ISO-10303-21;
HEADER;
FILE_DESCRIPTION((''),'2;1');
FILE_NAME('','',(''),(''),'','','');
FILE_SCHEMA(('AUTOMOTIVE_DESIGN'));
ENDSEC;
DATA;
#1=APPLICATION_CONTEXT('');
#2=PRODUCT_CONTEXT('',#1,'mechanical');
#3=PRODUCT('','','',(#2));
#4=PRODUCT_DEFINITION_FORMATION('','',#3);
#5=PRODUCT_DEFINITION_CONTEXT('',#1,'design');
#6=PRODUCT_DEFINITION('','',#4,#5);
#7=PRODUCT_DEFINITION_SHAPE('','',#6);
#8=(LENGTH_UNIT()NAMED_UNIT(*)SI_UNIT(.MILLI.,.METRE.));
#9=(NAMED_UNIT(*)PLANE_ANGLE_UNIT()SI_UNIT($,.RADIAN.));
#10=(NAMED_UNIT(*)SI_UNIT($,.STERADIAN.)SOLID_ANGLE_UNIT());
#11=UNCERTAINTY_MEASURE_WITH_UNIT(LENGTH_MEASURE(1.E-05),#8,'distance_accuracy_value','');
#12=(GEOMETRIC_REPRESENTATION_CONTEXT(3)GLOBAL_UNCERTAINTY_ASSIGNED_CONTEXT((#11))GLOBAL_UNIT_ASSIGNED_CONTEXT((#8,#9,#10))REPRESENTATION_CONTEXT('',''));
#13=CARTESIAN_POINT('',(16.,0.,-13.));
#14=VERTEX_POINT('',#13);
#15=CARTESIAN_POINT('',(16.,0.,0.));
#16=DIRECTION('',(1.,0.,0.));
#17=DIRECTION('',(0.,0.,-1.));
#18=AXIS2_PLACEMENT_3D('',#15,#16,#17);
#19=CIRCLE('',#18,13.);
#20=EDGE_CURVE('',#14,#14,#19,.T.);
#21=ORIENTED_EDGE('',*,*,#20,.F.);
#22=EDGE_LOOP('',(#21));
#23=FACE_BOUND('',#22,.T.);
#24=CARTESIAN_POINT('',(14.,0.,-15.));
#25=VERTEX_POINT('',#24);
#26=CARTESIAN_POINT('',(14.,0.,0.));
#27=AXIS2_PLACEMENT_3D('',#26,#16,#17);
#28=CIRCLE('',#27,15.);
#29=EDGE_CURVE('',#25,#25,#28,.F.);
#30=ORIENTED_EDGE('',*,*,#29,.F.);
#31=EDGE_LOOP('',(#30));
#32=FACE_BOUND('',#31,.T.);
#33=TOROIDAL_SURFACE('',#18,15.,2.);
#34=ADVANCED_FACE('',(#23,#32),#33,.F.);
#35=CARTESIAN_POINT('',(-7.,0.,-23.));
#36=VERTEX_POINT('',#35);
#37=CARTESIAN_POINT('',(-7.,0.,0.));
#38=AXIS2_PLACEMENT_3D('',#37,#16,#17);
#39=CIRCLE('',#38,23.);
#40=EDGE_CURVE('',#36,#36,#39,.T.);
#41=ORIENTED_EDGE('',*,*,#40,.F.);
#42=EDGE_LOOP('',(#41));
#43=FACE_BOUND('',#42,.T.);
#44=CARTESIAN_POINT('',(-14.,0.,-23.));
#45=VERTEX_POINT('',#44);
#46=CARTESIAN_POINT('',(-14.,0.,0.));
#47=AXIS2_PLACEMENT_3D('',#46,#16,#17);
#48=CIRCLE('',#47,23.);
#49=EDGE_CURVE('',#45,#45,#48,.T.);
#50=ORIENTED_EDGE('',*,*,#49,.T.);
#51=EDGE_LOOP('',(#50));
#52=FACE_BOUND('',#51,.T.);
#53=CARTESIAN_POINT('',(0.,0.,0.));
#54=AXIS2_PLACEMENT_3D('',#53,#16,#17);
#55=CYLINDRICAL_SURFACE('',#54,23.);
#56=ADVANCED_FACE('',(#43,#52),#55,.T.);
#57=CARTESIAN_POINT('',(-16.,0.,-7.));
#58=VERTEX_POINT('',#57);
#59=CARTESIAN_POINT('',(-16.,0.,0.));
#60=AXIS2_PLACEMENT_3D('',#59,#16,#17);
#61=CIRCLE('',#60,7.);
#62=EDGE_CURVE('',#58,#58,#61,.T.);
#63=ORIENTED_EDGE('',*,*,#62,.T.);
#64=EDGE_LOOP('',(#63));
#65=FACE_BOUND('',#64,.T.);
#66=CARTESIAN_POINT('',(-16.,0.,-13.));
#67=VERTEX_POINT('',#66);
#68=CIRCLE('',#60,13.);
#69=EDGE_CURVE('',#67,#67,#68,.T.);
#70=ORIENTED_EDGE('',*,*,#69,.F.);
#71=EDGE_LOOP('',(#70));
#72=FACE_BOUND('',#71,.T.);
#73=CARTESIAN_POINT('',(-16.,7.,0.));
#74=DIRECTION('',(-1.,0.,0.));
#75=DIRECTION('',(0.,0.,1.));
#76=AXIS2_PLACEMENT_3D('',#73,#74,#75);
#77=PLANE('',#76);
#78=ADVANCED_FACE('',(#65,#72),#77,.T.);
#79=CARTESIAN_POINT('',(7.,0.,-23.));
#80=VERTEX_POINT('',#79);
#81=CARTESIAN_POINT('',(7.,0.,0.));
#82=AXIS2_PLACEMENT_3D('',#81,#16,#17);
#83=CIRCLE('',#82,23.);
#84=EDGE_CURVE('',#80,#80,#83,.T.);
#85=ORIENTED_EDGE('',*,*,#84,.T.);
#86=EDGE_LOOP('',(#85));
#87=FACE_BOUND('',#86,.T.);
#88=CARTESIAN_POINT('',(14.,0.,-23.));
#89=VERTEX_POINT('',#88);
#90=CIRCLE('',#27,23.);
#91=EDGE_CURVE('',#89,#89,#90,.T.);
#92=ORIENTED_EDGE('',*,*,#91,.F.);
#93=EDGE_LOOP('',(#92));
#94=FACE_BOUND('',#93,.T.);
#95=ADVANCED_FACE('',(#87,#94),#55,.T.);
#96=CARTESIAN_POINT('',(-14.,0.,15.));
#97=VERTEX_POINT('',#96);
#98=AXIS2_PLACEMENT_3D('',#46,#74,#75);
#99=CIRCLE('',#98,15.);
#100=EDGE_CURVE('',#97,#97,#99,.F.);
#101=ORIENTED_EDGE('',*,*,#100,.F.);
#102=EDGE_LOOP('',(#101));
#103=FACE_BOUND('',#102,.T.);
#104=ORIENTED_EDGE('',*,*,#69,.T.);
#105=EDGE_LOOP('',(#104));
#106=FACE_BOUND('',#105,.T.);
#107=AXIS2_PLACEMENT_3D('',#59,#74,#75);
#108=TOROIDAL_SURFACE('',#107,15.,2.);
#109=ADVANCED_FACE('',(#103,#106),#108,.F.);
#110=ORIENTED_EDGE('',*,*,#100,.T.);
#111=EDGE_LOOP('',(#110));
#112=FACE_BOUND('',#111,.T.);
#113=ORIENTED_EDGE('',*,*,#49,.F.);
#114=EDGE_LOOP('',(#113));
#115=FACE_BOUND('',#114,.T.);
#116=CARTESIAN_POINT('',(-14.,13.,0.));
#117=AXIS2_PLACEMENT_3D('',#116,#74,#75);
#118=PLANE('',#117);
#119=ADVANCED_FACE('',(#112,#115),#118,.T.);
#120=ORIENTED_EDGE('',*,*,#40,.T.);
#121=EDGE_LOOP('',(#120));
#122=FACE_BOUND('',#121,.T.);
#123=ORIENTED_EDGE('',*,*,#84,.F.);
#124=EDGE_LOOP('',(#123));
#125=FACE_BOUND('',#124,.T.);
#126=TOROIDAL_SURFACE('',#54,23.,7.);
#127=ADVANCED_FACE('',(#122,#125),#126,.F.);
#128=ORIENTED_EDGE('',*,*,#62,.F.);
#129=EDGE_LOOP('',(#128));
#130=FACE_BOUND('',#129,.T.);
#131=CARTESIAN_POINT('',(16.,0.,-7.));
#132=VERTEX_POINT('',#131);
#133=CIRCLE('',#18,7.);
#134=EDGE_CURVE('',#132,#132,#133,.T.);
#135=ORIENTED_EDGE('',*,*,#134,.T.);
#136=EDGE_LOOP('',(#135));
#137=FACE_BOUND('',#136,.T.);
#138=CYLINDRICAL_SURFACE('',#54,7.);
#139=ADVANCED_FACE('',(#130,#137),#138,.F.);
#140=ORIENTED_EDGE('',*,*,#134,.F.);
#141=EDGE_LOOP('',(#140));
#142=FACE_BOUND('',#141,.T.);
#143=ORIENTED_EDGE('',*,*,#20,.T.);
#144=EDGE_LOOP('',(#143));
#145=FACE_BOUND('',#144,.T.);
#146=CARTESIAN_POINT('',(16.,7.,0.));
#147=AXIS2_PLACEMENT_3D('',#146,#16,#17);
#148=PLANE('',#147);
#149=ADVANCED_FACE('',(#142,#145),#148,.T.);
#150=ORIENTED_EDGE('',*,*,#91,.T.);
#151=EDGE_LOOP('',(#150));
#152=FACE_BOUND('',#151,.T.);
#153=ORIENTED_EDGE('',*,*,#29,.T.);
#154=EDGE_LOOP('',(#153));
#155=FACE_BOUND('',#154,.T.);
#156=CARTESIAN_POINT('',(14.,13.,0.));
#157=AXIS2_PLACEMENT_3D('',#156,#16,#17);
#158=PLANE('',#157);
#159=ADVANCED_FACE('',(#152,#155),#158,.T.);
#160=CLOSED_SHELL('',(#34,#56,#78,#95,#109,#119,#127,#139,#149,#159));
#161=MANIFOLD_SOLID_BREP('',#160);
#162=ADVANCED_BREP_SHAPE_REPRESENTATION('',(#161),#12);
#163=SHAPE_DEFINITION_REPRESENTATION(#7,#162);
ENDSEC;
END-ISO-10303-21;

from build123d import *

# Parameters (mm, degrees)
FILLET1_R = 2


with BuildPart() as part:
    # Sketch1 → Revolve1 (revolve)
    with BuildSketch(Plane.XY, mode=Mode.PRIVATE) as revolve1_sk:
        with BuildLine():
            Line((-16, 7), (16, 7))
            Line((16, 7), (16, 13))
            Line((16, 13), (14, 13))
            Line((14, 13), (14, 23))
            Line((14, 23), (7, 23))
            ThreePointArc((7, 23), (0, 16), (-7, 23))
            Line((-7, 23), (-14, 23))
            Line((-14, 23), (-14, 13))
            Line((-14, 13), (-16, 13))
            Line((-16, 13), (-16, 7))
        make_face()
    revolve(revolve1_sk.sketch.rotate(Axis((0, 0, 0), (-1, 0, 0)), 90), axis=Axis((0, 0, 0), (-1, 0, 0)))

    # Fillet1
    fillet1_edges = [part.edges().sort_by_distance(p)[0] for p in [
        (-14, 0, 13),
        (14, 0, 13),
    ]]
    fillet(fillet1_edges, radius=FILLET1_R - 0.0001)  # a hair under: the kernel refuses the full size


solid = part.part
